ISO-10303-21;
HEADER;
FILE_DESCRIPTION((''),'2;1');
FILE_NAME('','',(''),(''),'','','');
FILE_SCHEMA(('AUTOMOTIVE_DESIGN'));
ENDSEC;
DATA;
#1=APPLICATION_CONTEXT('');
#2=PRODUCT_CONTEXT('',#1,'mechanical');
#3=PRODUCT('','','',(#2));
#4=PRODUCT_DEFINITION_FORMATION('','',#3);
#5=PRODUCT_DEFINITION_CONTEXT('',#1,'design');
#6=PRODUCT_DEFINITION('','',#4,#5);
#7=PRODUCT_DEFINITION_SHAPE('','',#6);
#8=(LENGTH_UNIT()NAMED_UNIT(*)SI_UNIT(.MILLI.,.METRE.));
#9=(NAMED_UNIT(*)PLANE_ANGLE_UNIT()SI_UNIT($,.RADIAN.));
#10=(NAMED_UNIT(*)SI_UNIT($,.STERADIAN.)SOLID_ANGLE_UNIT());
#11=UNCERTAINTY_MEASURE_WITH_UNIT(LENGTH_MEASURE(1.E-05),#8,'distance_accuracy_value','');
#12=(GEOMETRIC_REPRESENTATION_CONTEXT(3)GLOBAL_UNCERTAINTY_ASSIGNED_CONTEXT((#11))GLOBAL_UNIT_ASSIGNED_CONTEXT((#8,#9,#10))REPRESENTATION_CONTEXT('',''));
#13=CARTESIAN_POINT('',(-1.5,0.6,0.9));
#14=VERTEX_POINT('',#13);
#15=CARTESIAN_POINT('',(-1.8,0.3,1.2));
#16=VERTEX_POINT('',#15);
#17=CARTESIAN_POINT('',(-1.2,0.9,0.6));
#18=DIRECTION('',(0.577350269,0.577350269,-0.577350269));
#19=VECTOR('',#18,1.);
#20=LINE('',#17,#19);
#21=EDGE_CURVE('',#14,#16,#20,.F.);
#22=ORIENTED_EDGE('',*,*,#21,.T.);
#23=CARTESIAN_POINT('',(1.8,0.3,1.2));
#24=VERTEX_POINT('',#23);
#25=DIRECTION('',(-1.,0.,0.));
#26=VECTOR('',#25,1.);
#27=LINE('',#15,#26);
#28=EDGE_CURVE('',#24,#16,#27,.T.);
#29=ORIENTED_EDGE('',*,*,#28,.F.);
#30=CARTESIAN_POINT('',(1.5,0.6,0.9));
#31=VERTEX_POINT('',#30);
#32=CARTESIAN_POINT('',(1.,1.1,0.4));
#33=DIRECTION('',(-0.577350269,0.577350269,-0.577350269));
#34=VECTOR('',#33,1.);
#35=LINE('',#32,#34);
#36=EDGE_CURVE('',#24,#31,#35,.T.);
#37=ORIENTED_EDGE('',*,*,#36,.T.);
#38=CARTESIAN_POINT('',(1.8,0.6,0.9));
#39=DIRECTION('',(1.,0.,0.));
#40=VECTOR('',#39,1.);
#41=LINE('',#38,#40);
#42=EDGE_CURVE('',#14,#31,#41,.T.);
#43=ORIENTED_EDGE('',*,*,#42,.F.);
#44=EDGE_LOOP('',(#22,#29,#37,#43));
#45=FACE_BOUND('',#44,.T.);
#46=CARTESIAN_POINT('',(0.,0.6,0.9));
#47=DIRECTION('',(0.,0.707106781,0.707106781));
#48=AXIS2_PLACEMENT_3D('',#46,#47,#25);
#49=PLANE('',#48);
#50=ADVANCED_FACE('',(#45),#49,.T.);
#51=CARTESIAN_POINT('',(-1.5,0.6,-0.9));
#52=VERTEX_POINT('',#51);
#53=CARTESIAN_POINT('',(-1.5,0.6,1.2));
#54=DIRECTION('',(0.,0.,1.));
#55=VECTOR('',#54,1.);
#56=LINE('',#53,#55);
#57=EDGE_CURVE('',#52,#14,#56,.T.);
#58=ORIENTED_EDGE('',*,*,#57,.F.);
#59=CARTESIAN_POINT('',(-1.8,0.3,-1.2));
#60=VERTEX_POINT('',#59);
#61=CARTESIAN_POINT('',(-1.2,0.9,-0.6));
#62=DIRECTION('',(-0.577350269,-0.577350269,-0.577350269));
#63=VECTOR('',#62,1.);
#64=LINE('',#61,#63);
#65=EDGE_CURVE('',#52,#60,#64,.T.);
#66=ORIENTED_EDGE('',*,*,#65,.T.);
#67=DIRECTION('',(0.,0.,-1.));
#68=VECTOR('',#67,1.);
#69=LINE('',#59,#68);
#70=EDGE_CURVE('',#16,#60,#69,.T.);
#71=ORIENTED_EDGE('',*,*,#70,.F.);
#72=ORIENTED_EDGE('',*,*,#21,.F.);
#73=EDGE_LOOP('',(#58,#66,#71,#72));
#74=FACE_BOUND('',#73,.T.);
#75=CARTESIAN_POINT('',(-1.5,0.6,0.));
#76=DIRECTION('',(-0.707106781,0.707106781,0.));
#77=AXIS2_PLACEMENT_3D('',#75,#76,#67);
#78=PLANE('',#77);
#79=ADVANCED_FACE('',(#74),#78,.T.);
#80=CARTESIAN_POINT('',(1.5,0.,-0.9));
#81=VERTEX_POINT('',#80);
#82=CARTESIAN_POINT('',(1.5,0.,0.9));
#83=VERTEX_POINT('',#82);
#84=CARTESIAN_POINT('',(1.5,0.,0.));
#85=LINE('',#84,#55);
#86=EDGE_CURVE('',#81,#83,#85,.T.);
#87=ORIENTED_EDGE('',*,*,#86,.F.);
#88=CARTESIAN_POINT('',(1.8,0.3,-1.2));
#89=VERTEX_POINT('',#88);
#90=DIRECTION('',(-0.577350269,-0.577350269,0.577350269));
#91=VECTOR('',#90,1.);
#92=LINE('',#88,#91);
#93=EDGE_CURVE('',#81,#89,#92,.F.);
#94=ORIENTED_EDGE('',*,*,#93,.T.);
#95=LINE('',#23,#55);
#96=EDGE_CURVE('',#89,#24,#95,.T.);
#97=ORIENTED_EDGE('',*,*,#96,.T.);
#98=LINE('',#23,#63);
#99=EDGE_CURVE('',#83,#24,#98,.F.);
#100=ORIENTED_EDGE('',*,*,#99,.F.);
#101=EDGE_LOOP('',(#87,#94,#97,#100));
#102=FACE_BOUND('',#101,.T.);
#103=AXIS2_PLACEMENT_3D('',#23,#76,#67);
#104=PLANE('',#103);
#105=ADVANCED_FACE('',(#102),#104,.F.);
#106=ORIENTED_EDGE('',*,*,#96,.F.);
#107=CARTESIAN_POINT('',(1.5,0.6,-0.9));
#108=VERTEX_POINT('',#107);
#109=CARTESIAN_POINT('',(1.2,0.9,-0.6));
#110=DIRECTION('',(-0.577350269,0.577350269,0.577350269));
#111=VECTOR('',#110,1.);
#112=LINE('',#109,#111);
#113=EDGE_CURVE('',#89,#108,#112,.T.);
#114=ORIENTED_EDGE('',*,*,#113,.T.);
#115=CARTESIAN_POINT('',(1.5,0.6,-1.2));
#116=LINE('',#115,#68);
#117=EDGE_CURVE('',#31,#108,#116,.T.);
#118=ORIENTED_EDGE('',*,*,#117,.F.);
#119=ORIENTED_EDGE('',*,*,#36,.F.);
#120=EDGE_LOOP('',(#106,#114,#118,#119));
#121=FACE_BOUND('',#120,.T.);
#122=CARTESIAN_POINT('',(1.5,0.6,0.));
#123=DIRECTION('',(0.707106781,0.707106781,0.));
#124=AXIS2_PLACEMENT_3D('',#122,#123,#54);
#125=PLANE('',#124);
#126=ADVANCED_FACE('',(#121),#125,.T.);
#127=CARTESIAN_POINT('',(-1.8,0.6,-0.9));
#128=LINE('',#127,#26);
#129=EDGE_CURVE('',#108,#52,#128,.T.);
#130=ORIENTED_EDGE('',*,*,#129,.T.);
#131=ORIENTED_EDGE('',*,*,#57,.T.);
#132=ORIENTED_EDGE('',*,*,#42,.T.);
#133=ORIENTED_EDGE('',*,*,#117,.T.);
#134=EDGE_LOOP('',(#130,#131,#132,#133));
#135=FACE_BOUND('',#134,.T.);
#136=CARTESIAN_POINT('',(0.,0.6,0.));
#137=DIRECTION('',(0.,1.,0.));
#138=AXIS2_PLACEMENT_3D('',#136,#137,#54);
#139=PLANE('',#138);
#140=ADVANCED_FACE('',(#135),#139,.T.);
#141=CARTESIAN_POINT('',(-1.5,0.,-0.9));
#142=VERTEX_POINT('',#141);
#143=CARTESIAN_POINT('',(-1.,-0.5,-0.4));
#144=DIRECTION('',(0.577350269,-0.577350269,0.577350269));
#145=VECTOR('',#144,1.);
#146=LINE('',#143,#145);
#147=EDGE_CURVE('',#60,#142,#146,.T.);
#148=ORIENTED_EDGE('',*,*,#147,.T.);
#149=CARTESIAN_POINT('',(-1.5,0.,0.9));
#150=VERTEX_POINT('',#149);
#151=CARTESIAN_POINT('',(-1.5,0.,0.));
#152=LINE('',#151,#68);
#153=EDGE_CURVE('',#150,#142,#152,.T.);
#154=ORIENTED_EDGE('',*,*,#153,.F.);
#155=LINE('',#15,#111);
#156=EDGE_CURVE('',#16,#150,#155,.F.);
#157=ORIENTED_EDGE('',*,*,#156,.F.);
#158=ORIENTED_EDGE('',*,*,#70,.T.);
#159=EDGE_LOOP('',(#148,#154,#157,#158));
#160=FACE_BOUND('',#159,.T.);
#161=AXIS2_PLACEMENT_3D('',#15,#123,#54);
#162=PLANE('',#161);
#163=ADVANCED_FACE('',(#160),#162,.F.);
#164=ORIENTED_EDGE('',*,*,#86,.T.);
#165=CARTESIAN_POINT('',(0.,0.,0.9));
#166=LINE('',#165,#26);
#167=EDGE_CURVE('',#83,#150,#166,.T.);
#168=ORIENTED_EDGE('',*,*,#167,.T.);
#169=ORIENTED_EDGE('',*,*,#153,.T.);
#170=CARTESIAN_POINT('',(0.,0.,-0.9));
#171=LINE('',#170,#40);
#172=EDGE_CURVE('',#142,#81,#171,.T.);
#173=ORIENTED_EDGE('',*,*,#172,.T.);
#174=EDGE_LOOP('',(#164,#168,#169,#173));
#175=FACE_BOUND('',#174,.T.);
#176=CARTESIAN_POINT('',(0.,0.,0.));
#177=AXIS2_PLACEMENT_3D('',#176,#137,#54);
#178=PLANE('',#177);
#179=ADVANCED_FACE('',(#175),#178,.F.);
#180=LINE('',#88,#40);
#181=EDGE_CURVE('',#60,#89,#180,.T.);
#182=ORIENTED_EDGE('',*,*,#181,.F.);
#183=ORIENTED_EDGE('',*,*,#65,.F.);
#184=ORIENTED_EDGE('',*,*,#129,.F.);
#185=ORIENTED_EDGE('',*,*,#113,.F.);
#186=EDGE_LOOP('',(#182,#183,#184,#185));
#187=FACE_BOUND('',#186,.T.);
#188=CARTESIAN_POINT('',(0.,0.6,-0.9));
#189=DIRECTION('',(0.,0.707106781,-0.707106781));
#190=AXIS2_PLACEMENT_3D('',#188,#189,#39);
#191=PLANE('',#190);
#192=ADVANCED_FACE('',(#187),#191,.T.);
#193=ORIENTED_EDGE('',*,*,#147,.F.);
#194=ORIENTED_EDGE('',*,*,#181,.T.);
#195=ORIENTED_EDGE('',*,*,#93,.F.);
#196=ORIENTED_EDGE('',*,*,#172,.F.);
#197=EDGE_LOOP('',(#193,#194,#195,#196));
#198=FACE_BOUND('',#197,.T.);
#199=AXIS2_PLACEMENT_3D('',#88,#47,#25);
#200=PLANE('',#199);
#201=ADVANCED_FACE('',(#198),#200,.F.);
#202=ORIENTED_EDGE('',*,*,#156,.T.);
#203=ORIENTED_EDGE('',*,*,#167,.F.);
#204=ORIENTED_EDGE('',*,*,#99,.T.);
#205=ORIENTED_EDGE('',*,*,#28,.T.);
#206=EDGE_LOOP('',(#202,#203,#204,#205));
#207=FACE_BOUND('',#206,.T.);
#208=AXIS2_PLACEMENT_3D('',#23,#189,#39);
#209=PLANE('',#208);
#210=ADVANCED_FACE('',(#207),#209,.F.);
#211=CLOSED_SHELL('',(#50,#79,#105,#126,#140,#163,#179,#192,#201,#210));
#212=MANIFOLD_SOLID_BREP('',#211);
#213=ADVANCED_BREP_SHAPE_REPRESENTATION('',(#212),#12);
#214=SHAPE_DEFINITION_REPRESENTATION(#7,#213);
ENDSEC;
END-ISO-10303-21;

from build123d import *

# Parameters (mm, degrees)
ESQUISSE1_W        = 3.6
ESQUISSE1_H        = 2.4
BOSS_EXTRU_1_DEPTH = 0.6
CHANFREIN1_SIZE    = 0.3


with BuildPart() as part:
    # Esquisse1 → Boss.-Extru.1 (new body)
    with BuildSketch(Plane(origin=(0, 0, 0), x_dir=(1, 0, 0), z_dir=(0, 1, 0))):
        Rectangle(ESQUISSE1_W, ESQUISSE1_H)
    extrude(amount=BOSS_EXTRU_1_DEPTH)

    # Chanfrein1
    # the kernel refuses this chamfer: 0.3 mm, written as the material it takes off along each edge
    with BuildSketch(Plane(origin=(2.571504896, 0, 1.2), x_dir=(0, 0.9996219169112968, 0.027495876610586632), z_dir=(-1, 0, 0)), Plane(origin=(-2.571504896, 0, -1.2), x_dir=(0, 0.9996219169112968, -0.027495876610586632), z_dir=(1, 0, 0))) as chanfrein1_piece_1:
        Polygon((CHANFREIN1_SIZE * 0.999621916911, CHANFREIN1_SIZE * 0.0274958766106), (-CHANFREIN1_SIZE * 0.0274958766106, CHANFREIN1_SIZE * 0.999621916911), (0, 0), align=None)
    extrude(amount=5.143009793, mode=Mode.SUBTRACT)
    with BuildSketch(Plane(origin=(1.8, 0, -1.971504896), x_dir=(0.027495876610586632, 0.9996219169112968, 0), z_dir=(0, 0, 1)), Plane(origin=(-1.8, 0, 1.971504896), x_dir=(-0.027495876610586632, 0.9996219169112968, 0), z_dir=(0, 0, -1))) as chanfrein1_piece_2:
        Polygon((CHANFREIN1_SIZE * 0.999621916911, CHANFREIN1_SIZE * 0.0274958766106), (-CHANFREIN1_SIZE * 0.0274958766106, CHANFREIN1_SIZE * 0.999621916911), (0, 0), align=None)
    extrude(amount=3.943009793, mode=Mode.SUBTRACT)
    with BuildSketch(Plane(origin=(-2.571504896, 0.6, -1.2), x_dir=(0, -0.9996219169112968, -0.027495876610586632), z_dir=(1, 0, 0)), Plane(origin=(2.571504896, 0.6, 1.2), x_dir=(0, -0.9996219169112968, 0.027495876610586632), z_dir=(-1, 0, 0))) as chanfrein1_piece_3:
        Polygon((CHANFREIN1_SIZE * 0.999621916911, -CHANFREIN1_SIZE * 0.0274958766106), (-CHANFREIN1_SIZE * 0.0274958766106, -CHANFREIN1_SIZE * 0.999621916911), (0, 0), align=None)
    extrude(amount=5.143009793, mode=Mode.SUBTRACT)
    with BuildSketch(Plane(origin=(1.8, 0.6, -1.971504896), x_dir=(0.027495876610586632, -0.9996219169112968, 0), z_dir=(0, 0, 1)), Plane(origin=(-1.8, 0.6, 1.971504896), x_dir=(-0.027495876610586632, -0.9996219169112968, 0), z_dir=(0, 0, -1))) as chanfrein1_piece_4:
        Polygon((CHANFREIN1_SIZE * 0.999621916911, -CHANFREIN1_SIZE * 0.0274958766106), (-CHANFREIN1_SIZE * 0.0274958766106, -CHANFREIN1_SIZE * 0.999621916911), (0, 0), align=None)
    extrude(amount=3.943009793, mode=Mode.SUBTRACT)


solid = part.part
